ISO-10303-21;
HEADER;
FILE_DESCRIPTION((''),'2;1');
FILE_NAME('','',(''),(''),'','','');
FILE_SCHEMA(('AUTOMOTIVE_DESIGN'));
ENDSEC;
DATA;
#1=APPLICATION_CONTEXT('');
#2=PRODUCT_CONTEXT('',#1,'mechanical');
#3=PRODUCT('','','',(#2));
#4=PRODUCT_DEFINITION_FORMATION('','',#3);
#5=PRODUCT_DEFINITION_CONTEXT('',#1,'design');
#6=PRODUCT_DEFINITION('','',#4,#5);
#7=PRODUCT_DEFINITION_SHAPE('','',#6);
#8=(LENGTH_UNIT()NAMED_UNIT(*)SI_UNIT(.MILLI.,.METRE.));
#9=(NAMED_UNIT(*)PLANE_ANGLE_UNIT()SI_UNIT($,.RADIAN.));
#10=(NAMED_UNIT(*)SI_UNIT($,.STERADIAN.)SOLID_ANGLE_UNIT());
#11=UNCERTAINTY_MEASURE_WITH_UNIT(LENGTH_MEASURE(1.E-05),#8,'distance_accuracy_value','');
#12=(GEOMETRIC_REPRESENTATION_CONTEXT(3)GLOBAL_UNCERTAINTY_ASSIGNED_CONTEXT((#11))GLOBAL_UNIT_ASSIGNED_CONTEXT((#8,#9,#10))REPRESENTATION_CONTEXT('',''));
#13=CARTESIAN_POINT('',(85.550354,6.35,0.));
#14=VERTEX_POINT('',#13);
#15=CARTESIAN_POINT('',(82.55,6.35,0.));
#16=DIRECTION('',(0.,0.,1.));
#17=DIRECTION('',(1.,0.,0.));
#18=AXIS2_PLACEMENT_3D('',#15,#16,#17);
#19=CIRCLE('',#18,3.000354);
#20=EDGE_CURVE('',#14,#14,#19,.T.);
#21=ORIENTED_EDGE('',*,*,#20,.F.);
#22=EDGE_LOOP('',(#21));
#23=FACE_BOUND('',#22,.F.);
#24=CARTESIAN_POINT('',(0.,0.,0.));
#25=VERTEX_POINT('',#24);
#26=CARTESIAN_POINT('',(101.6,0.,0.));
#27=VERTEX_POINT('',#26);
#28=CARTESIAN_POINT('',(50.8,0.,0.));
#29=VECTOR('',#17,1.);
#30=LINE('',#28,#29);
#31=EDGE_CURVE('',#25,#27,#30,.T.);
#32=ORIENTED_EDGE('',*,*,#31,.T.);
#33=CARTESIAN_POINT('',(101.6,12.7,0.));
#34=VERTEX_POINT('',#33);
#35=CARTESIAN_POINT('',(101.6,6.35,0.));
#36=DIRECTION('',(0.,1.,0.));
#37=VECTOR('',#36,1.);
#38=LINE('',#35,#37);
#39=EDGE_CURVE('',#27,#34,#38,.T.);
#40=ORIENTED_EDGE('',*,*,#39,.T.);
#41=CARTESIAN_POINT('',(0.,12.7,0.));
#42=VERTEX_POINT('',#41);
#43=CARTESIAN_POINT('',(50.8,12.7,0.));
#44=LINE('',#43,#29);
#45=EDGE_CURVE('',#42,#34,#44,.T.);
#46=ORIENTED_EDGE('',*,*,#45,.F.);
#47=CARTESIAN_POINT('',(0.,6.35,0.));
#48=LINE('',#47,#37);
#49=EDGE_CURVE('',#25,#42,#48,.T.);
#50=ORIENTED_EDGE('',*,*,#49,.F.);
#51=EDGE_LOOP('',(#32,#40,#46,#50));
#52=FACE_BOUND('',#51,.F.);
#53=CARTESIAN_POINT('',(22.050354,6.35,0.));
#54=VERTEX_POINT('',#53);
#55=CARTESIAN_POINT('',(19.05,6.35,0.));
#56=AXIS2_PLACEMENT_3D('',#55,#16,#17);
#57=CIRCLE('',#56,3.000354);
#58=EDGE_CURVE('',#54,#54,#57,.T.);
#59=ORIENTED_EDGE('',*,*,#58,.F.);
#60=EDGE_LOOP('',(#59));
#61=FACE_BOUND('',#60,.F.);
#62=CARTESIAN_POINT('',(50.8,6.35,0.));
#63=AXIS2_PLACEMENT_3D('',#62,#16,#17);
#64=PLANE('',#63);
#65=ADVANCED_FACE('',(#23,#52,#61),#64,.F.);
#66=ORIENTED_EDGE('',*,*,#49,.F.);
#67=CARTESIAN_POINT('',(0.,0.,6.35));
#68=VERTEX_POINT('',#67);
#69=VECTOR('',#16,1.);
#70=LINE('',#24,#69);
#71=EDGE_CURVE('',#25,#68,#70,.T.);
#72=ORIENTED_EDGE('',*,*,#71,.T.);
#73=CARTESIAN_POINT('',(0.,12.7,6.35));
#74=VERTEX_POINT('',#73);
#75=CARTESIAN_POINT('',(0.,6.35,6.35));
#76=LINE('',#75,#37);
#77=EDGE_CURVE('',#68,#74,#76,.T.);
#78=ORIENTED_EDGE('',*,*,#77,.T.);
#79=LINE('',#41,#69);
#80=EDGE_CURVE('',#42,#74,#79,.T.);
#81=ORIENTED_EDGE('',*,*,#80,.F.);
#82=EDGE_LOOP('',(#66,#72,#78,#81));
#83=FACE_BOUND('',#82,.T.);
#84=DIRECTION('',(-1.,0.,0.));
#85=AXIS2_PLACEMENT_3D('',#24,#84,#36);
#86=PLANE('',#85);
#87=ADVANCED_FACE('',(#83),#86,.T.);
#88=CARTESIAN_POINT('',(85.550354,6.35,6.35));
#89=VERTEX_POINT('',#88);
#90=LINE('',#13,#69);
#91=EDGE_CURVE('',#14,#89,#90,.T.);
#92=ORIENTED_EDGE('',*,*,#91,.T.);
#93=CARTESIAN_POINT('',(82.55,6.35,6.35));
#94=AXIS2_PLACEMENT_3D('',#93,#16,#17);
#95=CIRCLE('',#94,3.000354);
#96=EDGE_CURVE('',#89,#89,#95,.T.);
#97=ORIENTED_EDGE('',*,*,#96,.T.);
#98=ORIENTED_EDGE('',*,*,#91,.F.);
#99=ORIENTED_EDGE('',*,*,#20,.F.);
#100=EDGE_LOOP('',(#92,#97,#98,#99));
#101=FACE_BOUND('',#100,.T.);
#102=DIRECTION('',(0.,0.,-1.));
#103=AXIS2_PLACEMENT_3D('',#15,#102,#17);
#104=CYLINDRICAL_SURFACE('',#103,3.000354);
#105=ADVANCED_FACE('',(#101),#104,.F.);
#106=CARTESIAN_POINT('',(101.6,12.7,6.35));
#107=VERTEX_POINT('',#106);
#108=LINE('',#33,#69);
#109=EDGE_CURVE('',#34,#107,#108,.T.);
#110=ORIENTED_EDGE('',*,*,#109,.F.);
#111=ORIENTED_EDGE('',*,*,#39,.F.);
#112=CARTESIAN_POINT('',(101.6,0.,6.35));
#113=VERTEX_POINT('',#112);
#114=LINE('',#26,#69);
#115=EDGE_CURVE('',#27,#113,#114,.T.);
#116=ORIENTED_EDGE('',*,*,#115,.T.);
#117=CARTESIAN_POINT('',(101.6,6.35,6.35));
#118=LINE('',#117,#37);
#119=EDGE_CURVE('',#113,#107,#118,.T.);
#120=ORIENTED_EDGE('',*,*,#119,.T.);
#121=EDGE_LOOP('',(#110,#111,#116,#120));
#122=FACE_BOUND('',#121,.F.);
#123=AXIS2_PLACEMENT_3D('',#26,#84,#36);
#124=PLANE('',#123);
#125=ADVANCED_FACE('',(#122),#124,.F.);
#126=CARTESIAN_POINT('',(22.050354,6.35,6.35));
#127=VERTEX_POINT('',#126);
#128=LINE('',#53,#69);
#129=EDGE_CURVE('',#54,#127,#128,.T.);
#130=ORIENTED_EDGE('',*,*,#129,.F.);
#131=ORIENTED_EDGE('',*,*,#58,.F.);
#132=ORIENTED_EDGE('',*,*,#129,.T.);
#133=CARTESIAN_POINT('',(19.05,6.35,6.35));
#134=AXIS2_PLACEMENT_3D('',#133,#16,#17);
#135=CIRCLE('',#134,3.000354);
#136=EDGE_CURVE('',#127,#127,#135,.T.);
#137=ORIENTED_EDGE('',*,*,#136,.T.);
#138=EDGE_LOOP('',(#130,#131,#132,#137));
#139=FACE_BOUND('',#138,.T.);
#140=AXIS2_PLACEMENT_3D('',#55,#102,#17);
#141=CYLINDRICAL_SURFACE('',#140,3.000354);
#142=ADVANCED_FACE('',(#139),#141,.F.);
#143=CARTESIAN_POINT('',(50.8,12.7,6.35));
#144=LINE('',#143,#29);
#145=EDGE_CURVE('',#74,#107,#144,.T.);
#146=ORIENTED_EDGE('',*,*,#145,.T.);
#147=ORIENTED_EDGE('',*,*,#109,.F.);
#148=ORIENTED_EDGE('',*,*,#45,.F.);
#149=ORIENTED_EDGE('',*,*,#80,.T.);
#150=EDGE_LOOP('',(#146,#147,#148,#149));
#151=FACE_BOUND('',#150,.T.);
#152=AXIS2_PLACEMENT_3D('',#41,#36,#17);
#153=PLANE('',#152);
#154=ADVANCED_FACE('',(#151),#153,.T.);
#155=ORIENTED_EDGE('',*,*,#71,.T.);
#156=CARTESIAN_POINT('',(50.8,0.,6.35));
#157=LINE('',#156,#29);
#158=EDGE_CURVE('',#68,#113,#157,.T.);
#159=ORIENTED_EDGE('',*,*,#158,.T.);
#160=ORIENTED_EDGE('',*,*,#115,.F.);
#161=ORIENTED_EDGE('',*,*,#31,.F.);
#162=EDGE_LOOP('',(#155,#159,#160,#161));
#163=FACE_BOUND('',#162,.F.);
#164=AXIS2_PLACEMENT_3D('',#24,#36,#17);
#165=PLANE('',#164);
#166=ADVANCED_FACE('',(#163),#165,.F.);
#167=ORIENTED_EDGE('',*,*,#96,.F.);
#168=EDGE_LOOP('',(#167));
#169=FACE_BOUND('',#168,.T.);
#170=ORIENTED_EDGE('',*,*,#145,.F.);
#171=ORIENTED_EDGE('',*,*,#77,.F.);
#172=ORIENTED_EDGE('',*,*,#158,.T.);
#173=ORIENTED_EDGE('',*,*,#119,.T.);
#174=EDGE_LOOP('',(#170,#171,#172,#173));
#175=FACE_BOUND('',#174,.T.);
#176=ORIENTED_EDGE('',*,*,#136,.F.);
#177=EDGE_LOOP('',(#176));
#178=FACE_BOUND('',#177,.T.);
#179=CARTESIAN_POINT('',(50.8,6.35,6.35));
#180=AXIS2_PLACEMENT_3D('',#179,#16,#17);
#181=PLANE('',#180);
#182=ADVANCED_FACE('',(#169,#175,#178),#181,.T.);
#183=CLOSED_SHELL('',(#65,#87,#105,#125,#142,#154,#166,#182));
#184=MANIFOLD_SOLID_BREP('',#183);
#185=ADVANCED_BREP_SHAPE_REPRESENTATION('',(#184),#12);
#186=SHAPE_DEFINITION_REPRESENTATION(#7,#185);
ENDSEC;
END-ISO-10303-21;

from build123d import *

# Parameters (mm, degrees)
F0_W     = 101.6
F0_H     = 12.7
F0_R     = 3.0003539725
F1_DEPTH = 6.35


# Not quite as in the source:
# - a length typed as a fraction of an inch, garbled in the dataset ("3 / 203.2 mm" for 3/8 in), is restored


with BuildPart() as f1:
    # F0 (on Top) → F1 (new body)
    with BuildSketch(Plane.XY):
        with Locations((50.8, 6.35)):
            Rectangle(F0_W, F0_H)
        with Locations((19.05, 6.35)):
            Circle(F0_R, mode=Mode.SUBTRACT)
        with Locations((82.55, 6.35)):
            Circle(F0_R, mode=Mode.SUBTRACT)
    extrude(amount=F1_DEPTH)


solid = f1.part
